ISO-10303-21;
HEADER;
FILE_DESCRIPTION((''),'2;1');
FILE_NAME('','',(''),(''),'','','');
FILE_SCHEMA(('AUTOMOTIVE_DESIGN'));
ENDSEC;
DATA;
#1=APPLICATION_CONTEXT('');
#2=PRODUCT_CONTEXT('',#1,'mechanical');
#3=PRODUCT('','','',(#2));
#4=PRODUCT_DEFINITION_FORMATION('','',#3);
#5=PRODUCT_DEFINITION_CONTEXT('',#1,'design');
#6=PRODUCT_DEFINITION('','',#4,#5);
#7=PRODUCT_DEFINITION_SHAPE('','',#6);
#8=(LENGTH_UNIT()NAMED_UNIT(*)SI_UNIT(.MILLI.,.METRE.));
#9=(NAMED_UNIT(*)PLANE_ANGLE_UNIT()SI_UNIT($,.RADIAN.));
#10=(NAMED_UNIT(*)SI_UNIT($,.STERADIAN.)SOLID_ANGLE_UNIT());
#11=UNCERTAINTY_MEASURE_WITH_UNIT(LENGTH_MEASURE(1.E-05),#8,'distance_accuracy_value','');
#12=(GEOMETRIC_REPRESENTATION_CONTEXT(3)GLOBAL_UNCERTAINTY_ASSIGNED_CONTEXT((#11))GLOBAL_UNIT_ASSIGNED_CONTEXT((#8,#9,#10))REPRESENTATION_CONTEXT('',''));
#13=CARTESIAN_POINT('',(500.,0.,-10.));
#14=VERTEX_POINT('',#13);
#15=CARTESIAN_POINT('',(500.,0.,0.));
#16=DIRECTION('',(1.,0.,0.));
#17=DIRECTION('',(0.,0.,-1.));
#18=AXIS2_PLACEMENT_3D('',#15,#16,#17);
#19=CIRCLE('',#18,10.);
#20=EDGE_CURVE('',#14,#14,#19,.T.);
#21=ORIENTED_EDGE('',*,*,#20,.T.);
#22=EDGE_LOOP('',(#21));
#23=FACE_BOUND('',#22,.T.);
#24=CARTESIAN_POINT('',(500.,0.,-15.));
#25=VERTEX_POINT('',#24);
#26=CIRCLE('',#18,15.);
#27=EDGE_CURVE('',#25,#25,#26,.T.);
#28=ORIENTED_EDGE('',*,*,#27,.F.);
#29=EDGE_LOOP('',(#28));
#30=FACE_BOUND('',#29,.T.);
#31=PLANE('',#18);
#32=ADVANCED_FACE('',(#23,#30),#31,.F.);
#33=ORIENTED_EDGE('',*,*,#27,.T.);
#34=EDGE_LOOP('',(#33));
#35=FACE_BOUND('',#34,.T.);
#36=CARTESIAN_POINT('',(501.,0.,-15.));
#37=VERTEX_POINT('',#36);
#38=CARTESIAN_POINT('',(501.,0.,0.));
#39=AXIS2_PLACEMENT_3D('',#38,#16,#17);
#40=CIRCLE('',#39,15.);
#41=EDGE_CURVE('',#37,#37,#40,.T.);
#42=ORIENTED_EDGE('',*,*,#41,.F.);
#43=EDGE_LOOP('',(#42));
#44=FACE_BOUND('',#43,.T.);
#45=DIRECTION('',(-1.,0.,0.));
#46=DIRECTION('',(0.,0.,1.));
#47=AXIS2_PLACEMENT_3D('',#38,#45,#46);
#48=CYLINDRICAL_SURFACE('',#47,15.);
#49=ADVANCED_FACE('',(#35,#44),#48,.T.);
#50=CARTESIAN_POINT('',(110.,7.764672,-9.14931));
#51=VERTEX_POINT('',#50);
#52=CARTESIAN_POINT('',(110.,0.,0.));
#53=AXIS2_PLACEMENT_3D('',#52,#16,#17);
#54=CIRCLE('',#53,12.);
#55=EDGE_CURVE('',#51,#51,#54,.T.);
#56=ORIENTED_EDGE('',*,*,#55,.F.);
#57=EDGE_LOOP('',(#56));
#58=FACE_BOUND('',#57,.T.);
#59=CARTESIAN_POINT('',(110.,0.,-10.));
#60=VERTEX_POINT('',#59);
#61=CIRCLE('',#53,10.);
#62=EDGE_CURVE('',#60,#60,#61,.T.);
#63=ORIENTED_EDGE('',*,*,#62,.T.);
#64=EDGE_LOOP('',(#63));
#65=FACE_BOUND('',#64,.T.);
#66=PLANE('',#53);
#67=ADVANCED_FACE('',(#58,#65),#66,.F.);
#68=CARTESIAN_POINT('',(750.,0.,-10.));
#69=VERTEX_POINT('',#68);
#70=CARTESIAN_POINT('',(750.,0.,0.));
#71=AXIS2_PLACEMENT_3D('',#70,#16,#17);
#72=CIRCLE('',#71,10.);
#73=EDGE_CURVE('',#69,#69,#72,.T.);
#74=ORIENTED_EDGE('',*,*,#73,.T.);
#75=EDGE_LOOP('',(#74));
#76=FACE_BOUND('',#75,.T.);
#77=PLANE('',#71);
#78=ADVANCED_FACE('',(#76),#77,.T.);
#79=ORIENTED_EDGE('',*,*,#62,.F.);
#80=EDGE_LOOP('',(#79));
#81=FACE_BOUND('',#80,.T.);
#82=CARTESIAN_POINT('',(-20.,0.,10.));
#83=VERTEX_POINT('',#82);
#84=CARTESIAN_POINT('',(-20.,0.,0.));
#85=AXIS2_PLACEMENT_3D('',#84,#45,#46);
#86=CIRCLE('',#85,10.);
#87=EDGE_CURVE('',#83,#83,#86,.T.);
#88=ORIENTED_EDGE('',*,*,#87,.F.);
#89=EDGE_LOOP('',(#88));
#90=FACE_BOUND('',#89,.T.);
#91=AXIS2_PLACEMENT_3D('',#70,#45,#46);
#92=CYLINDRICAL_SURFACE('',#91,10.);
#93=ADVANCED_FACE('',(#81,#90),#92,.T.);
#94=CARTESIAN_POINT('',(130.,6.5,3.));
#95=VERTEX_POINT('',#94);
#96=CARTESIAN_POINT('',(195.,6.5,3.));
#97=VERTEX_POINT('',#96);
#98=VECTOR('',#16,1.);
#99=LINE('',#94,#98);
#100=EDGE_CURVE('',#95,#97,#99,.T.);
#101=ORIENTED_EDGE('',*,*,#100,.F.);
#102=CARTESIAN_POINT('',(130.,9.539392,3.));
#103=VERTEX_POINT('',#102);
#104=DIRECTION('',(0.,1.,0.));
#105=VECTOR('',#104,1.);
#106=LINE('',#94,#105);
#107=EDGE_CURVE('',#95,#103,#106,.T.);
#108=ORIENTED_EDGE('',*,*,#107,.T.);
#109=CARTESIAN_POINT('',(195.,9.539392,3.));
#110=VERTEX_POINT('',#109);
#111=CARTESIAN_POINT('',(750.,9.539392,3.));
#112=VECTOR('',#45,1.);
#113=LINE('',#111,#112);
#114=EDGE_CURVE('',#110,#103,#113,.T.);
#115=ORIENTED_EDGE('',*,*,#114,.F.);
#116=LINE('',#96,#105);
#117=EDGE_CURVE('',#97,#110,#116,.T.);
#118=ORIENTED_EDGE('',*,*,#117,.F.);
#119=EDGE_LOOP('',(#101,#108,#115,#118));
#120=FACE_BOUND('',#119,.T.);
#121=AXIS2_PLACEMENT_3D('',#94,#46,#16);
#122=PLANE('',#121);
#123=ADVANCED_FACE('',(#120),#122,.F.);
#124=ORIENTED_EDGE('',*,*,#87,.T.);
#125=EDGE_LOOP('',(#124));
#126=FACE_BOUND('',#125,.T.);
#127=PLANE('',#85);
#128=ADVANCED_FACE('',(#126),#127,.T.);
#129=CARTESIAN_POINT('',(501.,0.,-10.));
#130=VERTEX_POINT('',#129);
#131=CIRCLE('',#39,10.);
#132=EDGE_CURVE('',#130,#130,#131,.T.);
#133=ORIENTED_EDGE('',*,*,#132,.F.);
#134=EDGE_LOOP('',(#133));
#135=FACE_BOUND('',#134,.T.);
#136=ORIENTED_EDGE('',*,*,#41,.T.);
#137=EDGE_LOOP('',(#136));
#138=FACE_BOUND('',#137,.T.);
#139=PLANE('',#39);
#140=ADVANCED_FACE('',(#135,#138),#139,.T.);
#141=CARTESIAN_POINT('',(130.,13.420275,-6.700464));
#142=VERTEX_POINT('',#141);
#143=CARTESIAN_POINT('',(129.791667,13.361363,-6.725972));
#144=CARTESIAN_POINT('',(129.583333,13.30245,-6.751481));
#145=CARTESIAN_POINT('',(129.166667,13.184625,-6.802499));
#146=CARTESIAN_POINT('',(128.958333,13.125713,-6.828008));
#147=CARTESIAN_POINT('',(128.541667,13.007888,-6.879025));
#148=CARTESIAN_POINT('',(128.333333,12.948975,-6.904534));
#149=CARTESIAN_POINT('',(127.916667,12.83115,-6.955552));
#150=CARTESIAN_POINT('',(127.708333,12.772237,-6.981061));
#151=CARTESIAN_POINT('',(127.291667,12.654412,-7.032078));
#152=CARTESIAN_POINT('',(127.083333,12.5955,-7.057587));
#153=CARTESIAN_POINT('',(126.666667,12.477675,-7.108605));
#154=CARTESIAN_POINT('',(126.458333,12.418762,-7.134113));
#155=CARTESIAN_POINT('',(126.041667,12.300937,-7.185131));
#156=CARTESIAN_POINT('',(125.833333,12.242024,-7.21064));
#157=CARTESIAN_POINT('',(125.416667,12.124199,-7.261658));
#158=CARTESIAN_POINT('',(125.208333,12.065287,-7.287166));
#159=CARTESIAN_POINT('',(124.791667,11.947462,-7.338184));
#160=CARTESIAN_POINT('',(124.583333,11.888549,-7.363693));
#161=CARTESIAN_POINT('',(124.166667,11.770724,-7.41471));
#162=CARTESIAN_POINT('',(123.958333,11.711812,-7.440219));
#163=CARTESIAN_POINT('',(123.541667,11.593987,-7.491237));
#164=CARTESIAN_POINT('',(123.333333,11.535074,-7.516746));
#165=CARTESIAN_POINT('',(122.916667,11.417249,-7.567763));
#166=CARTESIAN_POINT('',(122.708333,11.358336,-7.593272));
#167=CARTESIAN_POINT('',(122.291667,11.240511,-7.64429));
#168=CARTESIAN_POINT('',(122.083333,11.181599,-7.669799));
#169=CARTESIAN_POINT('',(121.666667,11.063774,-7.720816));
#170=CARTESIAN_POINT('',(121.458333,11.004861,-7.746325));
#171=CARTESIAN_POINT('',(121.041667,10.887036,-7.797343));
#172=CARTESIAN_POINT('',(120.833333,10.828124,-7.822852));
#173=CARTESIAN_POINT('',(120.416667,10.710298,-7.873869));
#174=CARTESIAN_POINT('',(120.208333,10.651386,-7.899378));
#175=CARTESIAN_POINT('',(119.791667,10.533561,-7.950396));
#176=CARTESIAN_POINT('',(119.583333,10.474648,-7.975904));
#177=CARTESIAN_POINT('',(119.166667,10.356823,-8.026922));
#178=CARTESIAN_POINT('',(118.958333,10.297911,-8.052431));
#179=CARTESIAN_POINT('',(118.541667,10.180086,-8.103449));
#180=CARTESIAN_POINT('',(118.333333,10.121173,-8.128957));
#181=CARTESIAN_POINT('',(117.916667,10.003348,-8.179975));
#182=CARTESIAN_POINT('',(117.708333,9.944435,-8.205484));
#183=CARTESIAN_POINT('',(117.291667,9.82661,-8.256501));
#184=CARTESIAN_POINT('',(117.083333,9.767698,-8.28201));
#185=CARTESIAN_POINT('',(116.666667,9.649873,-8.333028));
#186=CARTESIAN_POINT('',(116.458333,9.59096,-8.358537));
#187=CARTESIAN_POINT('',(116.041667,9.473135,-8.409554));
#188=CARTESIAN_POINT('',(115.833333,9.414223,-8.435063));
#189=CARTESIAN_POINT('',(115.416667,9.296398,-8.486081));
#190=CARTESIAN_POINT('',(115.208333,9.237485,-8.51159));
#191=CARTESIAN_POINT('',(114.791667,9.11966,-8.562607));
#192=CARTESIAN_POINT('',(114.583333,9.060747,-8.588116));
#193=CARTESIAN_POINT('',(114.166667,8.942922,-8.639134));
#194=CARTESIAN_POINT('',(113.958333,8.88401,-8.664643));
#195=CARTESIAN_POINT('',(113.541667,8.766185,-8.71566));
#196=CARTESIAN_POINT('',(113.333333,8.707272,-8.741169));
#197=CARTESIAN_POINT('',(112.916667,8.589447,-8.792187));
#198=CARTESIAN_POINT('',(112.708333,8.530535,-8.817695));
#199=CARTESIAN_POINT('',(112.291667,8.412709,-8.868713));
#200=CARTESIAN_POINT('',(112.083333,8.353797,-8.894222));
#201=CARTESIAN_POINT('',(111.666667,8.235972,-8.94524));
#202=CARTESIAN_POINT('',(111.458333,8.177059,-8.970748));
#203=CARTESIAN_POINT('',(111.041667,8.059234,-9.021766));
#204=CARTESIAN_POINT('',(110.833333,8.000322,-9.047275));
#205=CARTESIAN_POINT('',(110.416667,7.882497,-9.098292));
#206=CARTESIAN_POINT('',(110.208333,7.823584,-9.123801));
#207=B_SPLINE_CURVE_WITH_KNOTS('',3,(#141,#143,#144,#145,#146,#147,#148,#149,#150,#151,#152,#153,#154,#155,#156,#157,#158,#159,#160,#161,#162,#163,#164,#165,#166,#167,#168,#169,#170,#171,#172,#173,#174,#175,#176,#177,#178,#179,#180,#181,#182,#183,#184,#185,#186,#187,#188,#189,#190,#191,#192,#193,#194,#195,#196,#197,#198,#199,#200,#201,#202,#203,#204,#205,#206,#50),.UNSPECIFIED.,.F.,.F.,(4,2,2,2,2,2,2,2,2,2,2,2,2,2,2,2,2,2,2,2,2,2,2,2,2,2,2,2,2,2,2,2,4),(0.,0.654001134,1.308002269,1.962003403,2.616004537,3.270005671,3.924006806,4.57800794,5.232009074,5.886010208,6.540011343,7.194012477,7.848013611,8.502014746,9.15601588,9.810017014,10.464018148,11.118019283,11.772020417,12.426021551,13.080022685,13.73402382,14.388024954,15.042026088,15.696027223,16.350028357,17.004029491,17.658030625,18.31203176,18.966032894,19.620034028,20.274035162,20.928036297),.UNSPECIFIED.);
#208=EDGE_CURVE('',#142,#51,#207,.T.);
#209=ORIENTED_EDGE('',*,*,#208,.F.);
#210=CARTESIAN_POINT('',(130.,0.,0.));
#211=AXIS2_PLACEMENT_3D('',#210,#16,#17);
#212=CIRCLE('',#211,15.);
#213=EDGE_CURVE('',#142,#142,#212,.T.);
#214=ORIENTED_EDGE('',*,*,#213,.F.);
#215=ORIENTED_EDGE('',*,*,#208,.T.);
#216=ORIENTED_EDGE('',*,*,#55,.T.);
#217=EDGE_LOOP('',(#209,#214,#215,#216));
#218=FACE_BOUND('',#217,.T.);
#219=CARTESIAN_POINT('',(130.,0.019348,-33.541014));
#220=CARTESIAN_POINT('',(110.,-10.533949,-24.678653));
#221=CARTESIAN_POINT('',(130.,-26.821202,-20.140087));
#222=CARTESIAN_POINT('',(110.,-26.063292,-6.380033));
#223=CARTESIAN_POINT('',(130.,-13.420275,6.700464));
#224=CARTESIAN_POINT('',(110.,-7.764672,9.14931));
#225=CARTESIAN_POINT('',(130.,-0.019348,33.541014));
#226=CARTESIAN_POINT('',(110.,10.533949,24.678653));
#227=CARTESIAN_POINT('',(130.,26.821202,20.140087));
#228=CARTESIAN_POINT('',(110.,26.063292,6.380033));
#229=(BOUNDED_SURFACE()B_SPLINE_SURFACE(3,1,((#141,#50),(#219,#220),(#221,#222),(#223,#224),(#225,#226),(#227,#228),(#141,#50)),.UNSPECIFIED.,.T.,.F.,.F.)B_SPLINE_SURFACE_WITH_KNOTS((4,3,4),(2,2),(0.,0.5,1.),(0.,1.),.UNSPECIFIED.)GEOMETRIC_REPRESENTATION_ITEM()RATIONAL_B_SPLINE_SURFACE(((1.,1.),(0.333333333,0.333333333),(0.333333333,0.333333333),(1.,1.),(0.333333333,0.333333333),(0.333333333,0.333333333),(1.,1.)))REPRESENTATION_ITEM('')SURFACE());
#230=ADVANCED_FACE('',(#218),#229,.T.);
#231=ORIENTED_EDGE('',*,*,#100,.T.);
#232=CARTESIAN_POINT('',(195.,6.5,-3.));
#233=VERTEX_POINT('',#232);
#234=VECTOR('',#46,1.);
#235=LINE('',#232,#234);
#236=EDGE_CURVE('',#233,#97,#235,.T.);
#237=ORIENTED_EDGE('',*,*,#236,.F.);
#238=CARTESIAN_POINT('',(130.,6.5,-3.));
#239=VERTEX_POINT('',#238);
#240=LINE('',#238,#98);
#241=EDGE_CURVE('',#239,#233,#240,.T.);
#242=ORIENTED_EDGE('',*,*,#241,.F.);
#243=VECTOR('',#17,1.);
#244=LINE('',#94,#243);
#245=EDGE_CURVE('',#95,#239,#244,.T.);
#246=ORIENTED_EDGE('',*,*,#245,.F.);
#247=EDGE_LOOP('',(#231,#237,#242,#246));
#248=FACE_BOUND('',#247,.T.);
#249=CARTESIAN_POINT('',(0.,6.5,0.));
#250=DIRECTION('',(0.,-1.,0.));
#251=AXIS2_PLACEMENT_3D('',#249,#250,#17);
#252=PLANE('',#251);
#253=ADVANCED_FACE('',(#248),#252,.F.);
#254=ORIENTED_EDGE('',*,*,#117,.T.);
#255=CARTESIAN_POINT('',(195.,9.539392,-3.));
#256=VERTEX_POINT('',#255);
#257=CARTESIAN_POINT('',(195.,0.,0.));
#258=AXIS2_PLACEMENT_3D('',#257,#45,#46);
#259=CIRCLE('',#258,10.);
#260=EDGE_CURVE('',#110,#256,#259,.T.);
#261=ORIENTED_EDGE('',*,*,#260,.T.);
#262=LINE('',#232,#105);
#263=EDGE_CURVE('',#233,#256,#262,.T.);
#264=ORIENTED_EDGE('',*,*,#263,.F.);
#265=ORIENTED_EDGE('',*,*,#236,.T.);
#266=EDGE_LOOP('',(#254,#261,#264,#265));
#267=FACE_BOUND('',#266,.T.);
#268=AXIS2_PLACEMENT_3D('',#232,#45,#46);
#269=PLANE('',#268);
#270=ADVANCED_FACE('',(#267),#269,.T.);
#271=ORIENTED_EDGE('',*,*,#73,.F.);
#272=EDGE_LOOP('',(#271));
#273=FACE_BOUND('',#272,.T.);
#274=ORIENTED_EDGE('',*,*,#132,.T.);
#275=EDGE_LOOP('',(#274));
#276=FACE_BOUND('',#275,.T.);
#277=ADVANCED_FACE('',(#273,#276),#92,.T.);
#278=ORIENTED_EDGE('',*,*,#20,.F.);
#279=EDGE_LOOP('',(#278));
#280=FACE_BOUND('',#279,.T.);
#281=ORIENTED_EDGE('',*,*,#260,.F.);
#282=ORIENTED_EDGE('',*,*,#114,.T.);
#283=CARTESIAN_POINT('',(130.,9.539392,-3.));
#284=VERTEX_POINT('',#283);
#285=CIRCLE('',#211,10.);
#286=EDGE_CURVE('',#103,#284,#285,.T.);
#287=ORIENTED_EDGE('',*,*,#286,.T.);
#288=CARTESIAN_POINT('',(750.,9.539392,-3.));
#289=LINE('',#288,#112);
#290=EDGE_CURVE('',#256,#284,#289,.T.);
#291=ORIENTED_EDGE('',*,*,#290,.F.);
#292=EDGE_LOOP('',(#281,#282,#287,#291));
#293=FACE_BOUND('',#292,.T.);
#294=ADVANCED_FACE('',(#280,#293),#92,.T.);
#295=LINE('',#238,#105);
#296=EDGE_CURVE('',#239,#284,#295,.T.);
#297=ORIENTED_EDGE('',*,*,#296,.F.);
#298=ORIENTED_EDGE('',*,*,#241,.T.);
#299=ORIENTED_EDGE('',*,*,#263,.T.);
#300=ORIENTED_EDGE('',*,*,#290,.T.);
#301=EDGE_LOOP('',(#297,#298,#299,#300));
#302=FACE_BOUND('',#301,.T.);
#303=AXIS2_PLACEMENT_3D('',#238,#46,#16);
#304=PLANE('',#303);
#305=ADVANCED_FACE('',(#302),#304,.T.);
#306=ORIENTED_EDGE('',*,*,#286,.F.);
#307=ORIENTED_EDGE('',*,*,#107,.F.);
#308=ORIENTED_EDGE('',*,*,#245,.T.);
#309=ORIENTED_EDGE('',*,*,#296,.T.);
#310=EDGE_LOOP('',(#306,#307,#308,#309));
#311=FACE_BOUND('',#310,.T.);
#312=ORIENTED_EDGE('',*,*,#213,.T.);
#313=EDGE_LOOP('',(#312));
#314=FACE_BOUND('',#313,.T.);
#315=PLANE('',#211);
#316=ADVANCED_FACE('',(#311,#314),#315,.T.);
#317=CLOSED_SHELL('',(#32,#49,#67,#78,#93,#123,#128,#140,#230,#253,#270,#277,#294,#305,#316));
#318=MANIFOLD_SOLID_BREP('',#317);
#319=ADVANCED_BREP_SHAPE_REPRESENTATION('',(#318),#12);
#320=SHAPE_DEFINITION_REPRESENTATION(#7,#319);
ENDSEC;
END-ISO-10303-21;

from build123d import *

# Parameters (mm, degrees)
SKETCH3_R           = 10
BOSS_EXTRUDE1_DEPTH = 750
SKETCH6_R           = 15
BOSS_EXTRUDE2_DEPTH = 1
BOSS_EXTRUDE3_START = 20
SKETCH7_R           = 10
BOSS_EXTRUDE3_DEPTH = 20
SKETCH8_W           = 65
SKETCH8_H           = 6
CUT_EXTRUDE1_DEPTH  = 6


with BuildPart() as part:
    # Sketch3 → Boss-Extrude1 (new body)
    with BuildSketch(Plane(origin=(0, 0, 0), x_dir=(0, 0, -1), z_dir=(1, 0, 0))):
        Circle(SKETCH3_R)
    extrude(amount=BOSS_EXTRUDE1_DEPTH)

    # Loft1: read off the stored shape, not the designer's step
    # Loft1: loft between two sections, ruled curve by curve
    loft1_from = [
        Edge.make_bspline([(130, 13.420275273, -6.700463537), (130, 0.019348199, -33.541014082), (130, -26.821202346, -20.140087008), (130, -13.420275273, 6.700463537), (130, -0.019348199, 33.541014082), (130, 26.821202346, 20.140087008), (130, 13.420275273, -6.700463537)], [0, 0, 0, 0, 0.5, 0.5, 0.5, 1, 1, 1, 1], 3, [1, 0.333333333, 0.333333333, 1, 0.333333333, 0.333333333, 1]),
    ]
    loft1_to = [
        Edge.make_bspline([(110, 7.764671539, -9.149310132), (110, -10.533948725, -24.67865321), (110, -26.063291803, -6.380032946), (110, -7.764671539, 9.149310132), (110, 10.533948725, 24.67865321), (110, 26.063291803, 6.380032946), (110, 7.764671539, -9.149310132)], [0, 0, 0, 0, 0.5, 0.5, 0.5, 1, 1, 1, 1], 3, [1, 0.333333333, 0.333333333, 1, 0.333333333, 0.333333333, 1]),
    ]
    loft1 = Solid(Shell([*[Face.make_surface_from_curves(loft1_from[k], loft1_to[k]) for k in range(1)], Face(Wire(loft1_from)), Face(Wire(loft1_to))]))
    add(loft1)

    # Sketch6 → Boss-Extrude2 (add)
    with BuildSketch(Plane(origin=(500, 0, 0), x_dir=(0, 0, -1), z_dir=(1, 0, 0))):
        Circle(SKETCH6_R)
    extrude(amount=BOSS_EXTRUDE2_DEPTH)

    # Sketch7 → Boss-Extrude3 (add)
    with BuildSketch(Plane.ZY.offset(BOSS_EXTRUDE3_START)):
        with Locations(Location((0, 0, 0), (0, 0, 180))):
            Circle(SKETCH7_R)
    extrude(amount=-BOSS_EXTRUDE3_DEPTH)

    # Sketch8 → Cut-Extrude1 (cut)
    with BuildSketch(Plane(origin=(0, 12.5, 0), x_dir=(1, 0, 0), z_dir=(0, 1, 0))):
        with Locations((162.5, 0)):
            Rectangle(SKETCH8_W, SKETCH8_H)
    extrude(amount=-CUT_EXTRUDE1_DEPTH, mode=Mode.SUBTRACT)


solid = part.part
